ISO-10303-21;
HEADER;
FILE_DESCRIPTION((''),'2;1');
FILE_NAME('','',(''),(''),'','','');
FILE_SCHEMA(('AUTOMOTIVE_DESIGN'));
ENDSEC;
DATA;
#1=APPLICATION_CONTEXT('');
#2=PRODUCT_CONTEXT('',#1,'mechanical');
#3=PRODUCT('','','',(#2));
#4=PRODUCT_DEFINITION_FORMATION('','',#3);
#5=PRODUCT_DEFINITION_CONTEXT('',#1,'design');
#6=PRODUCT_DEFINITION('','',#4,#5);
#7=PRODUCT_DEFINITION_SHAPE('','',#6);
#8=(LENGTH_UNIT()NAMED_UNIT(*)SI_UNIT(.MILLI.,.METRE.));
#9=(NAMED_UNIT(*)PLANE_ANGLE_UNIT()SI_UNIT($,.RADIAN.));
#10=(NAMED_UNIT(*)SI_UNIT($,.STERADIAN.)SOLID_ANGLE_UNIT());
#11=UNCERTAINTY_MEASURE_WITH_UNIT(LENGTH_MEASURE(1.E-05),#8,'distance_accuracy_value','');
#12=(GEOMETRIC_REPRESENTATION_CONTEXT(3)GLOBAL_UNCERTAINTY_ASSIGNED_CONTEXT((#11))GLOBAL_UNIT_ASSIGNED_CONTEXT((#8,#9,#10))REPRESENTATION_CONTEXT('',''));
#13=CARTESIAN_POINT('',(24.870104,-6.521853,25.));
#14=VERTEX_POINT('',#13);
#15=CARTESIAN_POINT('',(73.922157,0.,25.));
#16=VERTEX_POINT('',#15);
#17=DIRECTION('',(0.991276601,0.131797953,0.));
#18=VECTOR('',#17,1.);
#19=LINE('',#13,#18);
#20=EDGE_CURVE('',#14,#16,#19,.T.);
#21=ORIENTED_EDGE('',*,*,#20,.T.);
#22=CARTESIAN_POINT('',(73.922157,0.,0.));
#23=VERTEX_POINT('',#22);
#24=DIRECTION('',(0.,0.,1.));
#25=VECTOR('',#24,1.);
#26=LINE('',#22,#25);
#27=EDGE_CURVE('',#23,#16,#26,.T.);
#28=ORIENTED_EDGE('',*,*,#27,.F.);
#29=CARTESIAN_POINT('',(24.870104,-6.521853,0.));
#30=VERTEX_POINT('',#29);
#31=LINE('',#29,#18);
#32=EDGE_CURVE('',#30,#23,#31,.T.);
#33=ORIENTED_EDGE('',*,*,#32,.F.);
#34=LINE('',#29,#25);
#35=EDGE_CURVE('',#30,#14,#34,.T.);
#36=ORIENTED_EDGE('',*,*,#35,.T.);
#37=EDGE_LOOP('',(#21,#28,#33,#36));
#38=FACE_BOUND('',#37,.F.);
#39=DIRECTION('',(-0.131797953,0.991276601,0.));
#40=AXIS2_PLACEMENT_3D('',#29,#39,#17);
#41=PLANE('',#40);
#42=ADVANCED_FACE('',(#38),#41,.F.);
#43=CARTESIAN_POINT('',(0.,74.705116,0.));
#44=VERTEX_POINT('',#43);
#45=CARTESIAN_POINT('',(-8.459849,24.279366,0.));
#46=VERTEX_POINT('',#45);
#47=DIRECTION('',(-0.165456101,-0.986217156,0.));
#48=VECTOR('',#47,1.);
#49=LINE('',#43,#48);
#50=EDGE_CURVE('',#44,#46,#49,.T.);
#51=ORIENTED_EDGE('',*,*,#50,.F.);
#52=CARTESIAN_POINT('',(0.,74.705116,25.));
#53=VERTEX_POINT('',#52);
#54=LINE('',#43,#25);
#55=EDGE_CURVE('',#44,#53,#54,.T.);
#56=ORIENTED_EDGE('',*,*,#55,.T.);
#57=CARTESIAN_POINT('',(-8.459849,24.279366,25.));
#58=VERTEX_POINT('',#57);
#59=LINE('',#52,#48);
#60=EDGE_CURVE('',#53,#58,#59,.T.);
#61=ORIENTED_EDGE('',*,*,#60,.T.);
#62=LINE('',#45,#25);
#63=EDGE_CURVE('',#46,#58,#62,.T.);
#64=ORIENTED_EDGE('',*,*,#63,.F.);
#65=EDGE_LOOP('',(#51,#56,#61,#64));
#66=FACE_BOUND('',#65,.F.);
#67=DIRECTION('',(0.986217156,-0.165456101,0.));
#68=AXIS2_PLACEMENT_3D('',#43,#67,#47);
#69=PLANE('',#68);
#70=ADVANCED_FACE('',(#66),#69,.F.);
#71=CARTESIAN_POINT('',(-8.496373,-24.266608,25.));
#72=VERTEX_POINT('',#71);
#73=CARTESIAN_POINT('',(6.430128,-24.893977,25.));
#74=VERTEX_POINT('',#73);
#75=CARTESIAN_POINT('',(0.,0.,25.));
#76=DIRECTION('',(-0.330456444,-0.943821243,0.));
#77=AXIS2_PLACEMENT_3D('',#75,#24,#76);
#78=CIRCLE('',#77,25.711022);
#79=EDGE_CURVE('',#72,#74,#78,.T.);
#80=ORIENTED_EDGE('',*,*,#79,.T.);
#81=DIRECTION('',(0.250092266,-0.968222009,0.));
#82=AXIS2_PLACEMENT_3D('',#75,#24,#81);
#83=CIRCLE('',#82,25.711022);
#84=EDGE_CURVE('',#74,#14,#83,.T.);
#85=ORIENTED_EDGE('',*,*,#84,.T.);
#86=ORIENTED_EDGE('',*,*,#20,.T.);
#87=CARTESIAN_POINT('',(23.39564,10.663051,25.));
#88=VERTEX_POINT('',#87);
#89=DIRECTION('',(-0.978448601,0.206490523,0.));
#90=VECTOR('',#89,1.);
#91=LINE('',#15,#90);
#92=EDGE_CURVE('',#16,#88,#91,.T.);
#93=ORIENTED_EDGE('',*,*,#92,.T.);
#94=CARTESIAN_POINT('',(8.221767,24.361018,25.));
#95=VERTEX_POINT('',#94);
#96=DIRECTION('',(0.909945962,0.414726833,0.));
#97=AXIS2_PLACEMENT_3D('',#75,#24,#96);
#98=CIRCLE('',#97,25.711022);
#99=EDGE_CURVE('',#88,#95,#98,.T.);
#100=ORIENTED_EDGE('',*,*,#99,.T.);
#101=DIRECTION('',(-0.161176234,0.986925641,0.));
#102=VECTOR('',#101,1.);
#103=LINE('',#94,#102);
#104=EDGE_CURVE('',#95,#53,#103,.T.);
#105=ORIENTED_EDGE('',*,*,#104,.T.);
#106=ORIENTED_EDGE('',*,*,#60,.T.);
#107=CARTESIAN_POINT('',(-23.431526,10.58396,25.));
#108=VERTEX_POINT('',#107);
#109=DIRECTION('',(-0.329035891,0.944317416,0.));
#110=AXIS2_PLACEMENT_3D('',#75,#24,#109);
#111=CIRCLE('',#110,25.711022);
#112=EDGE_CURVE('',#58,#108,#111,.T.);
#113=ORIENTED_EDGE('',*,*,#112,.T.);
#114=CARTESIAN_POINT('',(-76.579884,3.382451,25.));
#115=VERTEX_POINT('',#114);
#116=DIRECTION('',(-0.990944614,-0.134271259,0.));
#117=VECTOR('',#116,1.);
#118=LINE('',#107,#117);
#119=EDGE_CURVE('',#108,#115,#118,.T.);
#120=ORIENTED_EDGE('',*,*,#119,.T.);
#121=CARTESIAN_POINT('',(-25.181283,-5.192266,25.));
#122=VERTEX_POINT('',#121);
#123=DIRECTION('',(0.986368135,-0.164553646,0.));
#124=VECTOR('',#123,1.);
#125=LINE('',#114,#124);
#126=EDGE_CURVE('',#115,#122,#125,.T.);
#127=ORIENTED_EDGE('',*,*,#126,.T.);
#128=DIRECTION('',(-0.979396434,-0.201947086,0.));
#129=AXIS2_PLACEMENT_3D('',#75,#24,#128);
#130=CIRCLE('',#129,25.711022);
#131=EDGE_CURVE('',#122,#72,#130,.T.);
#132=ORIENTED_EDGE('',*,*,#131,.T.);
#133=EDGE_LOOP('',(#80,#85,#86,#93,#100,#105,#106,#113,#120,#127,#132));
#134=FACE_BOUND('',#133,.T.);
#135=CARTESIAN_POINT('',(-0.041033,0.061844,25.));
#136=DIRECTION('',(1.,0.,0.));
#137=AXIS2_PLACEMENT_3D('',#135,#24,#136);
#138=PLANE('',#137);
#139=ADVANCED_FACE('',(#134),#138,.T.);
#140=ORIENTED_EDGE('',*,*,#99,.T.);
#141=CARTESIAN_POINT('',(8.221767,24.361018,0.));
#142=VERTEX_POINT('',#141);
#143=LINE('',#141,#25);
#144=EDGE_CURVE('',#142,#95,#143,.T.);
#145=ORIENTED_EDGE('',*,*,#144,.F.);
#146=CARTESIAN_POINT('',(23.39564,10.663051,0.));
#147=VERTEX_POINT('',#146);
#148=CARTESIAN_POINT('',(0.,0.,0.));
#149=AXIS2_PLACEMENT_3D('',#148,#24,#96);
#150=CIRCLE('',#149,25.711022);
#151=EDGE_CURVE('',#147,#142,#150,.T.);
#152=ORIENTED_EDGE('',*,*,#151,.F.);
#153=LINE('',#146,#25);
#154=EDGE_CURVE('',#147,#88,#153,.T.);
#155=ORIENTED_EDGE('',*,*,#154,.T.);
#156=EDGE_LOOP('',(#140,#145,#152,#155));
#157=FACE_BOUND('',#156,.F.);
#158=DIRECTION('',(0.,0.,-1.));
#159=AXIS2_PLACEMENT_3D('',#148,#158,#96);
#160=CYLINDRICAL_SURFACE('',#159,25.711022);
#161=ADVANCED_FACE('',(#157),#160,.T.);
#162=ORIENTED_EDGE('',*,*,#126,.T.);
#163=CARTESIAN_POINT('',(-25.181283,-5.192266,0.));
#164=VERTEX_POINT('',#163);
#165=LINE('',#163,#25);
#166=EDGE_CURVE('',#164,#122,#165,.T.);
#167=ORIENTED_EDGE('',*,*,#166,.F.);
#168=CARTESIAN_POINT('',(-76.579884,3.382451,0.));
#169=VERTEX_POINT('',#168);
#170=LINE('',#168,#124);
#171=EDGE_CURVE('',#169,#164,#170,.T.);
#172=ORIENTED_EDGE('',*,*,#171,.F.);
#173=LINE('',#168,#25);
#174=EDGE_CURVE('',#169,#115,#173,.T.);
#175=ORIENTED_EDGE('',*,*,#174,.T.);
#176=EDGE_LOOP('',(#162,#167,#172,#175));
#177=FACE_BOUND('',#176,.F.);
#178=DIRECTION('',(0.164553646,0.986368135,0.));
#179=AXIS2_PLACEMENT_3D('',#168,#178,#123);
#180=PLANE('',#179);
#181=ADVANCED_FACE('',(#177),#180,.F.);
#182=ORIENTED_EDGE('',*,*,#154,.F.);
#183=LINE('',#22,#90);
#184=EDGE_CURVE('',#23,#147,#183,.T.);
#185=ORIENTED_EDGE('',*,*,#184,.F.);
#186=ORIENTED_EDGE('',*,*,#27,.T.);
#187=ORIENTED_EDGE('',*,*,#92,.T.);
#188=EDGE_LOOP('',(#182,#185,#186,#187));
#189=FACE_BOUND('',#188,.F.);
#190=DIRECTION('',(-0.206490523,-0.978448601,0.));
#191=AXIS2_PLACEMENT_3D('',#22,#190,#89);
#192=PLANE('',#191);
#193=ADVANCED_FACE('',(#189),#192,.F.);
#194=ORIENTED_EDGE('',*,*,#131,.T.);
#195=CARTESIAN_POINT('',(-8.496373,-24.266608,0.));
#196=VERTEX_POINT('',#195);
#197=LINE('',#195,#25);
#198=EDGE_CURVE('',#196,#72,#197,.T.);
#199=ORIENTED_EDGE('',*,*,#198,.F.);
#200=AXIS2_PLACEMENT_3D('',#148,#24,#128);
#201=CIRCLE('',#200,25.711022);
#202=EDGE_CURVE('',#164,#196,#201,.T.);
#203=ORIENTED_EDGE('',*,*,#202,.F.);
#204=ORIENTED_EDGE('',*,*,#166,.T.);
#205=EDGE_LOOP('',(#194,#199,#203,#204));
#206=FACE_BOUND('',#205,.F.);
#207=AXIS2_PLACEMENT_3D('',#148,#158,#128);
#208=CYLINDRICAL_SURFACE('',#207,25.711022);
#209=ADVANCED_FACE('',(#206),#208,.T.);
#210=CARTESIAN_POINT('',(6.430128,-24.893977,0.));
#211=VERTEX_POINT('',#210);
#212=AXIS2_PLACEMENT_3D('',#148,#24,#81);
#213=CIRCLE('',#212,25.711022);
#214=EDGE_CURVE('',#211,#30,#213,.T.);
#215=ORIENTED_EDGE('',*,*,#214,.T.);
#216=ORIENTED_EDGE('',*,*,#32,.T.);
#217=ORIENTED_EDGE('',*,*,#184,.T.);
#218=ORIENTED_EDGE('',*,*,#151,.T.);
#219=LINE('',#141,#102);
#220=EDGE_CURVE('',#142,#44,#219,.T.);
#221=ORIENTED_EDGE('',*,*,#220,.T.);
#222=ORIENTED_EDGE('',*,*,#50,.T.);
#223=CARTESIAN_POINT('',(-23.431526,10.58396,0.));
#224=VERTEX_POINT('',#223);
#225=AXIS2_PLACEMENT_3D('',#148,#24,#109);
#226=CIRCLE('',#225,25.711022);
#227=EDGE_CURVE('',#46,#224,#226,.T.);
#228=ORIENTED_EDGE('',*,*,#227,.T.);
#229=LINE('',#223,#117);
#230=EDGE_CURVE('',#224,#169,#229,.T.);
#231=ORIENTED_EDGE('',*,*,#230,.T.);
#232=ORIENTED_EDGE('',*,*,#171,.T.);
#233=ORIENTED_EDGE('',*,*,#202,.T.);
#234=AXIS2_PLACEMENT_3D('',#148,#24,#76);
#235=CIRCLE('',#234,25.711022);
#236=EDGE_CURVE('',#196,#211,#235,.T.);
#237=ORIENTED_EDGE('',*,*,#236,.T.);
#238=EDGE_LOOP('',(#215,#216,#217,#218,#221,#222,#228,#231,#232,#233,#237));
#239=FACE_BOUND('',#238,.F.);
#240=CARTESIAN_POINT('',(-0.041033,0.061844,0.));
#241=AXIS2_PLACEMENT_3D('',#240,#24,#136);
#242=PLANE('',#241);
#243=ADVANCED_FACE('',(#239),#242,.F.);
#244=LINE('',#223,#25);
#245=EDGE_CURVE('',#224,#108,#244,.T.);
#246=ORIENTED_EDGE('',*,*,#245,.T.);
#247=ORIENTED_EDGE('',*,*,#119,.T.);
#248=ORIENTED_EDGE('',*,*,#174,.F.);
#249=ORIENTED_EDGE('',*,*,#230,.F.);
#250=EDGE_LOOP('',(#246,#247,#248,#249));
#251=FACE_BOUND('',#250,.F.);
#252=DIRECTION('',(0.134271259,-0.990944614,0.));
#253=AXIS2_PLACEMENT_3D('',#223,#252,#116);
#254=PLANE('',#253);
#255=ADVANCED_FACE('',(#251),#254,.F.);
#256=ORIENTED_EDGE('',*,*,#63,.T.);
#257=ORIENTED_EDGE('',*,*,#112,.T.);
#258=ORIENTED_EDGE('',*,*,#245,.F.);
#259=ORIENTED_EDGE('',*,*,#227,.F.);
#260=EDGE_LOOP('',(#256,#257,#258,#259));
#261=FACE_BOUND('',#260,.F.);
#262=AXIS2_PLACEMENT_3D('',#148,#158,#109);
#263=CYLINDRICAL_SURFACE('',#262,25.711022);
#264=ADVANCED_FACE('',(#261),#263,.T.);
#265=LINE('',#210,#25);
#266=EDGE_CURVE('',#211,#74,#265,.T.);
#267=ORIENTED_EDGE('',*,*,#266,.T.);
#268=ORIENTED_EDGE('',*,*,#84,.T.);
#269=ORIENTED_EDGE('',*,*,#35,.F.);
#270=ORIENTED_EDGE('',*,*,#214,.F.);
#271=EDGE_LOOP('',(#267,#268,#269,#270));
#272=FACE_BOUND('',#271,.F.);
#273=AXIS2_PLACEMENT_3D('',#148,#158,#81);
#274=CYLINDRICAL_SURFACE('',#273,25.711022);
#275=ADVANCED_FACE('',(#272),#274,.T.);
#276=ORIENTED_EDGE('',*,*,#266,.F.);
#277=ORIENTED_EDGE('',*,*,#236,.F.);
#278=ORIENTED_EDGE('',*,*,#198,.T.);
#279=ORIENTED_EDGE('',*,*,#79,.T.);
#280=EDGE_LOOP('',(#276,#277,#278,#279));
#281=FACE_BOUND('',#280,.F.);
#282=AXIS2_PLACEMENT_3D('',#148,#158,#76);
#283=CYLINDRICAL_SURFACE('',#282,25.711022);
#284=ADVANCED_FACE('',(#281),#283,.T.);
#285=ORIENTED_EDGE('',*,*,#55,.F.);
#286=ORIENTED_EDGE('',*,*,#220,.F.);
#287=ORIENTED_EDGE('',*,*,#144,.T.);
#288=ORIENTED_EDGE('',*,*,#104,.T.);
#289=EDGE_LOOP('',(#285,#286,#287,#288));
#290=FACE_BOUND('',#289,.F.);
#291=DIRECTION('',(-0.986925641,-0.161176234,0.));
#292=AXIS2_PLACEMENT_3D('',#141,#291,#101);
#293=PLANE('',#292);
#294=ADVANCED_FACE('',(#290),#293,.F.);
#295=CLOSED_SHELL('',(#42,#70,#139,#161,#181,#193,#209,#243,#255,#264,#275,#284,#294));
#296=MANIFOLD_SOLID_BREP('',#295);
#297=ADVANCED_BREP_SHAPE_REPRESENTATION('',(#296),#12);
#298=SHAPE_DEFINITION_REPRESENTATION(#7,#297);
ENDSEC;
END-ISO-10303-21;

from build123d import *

# Parameters (mm, degrees)
F1_DEPTH = 25


with BuildPart() as f1:
    # F0 (on Top) → F1 (new body)
    with BuildSketch(Plane.XY):
        with BuildLine():
            ThreePointArc((24.8701038765, -6.5218529704), (25.4999256036, -3.2879214113), (25.7110216249, 0))
            ThreePointArc((25.7110216249, 0), (25.1255094172, 5.4557684631), (23.3956403104, 10.6630505701))
            ThreePointArc((23.3956403104, 10.6630505701), (17.2285716474, 19.0848880527), (8.2217665775, 24.3610177813))
            ThreePointArc((8.2217665775, 24.3610177813), (-0.1258474148, 25.7107136311), (-8.459848903, 24.2793655093))
            ThreePointArc((-8.459848903, 24.2793655093), (-17.3538464261, 18.9710476046), (-23.4315262789, 10.5839599978))
            ThreePointArc((-23.4315262789, 10.5839599978), (-25.5543270236, 2.8342553459), (-25.1812828872, -5.1922658973))
            ThreePointArc((-25.1812828872, -5.1922658973), (-19.3520995784, -16.9278727223), (-8.4963727751, -24.2666083881))
            ThreePointArc((-8.4963727751, -24.2666083881), (-1.0796944371, -25.6883415758), (6.430127649, -24.8939770108))
            ThreePointArc((6.430127649, -24.8939770108), (18.146896672, -18.2139170463), (24.8701038765, -6.5218529704))
        make_face()
        with BuildLine():
            ThreePointArc((23.3956403104, 10.6630505701), (25.1255094172, 5.4557684631), (25.7110216249, 0))
            ThreePointArc((25.7110216249, 0), (25.4999256036, -3.2879214113), (24.8701038765, -6.5218529704))
            Line((24.8701038765, -6.5218529704), (73.9221572876, 0))
            Line((73.9221572876, 0), (23.3956403104, 10.6630505701))
        make_face()
        with BuildLine():
            ThreePointArc((-8.459848903, 24.2793655093), (-0.1258474148, 25.7107136311), (8.2217665775, 24.3610177813))
            Line((8.2217665775, 24.3610177813), (0, 74.7051164508))
            Line((0, 74.7051164508), (-8.459848903, 24.2793655093))
        make_face()
        with BuildLine():
            ThreePointArc((-25.1812828872, -5.1922658973), (-25.5543270236, 2.8342553459), (-23.4315262789, 10.5839599978))
            Line((-23.4315262789, 10.5839599978), (-76.5798836946, 3.3824506681))
            Line((-76.5798836946, 3.3824506681), (-25.1812828872, -5.1922658973))
        make_face()
    extrude(amount=F1_DEPTH)


solid = f1.part
